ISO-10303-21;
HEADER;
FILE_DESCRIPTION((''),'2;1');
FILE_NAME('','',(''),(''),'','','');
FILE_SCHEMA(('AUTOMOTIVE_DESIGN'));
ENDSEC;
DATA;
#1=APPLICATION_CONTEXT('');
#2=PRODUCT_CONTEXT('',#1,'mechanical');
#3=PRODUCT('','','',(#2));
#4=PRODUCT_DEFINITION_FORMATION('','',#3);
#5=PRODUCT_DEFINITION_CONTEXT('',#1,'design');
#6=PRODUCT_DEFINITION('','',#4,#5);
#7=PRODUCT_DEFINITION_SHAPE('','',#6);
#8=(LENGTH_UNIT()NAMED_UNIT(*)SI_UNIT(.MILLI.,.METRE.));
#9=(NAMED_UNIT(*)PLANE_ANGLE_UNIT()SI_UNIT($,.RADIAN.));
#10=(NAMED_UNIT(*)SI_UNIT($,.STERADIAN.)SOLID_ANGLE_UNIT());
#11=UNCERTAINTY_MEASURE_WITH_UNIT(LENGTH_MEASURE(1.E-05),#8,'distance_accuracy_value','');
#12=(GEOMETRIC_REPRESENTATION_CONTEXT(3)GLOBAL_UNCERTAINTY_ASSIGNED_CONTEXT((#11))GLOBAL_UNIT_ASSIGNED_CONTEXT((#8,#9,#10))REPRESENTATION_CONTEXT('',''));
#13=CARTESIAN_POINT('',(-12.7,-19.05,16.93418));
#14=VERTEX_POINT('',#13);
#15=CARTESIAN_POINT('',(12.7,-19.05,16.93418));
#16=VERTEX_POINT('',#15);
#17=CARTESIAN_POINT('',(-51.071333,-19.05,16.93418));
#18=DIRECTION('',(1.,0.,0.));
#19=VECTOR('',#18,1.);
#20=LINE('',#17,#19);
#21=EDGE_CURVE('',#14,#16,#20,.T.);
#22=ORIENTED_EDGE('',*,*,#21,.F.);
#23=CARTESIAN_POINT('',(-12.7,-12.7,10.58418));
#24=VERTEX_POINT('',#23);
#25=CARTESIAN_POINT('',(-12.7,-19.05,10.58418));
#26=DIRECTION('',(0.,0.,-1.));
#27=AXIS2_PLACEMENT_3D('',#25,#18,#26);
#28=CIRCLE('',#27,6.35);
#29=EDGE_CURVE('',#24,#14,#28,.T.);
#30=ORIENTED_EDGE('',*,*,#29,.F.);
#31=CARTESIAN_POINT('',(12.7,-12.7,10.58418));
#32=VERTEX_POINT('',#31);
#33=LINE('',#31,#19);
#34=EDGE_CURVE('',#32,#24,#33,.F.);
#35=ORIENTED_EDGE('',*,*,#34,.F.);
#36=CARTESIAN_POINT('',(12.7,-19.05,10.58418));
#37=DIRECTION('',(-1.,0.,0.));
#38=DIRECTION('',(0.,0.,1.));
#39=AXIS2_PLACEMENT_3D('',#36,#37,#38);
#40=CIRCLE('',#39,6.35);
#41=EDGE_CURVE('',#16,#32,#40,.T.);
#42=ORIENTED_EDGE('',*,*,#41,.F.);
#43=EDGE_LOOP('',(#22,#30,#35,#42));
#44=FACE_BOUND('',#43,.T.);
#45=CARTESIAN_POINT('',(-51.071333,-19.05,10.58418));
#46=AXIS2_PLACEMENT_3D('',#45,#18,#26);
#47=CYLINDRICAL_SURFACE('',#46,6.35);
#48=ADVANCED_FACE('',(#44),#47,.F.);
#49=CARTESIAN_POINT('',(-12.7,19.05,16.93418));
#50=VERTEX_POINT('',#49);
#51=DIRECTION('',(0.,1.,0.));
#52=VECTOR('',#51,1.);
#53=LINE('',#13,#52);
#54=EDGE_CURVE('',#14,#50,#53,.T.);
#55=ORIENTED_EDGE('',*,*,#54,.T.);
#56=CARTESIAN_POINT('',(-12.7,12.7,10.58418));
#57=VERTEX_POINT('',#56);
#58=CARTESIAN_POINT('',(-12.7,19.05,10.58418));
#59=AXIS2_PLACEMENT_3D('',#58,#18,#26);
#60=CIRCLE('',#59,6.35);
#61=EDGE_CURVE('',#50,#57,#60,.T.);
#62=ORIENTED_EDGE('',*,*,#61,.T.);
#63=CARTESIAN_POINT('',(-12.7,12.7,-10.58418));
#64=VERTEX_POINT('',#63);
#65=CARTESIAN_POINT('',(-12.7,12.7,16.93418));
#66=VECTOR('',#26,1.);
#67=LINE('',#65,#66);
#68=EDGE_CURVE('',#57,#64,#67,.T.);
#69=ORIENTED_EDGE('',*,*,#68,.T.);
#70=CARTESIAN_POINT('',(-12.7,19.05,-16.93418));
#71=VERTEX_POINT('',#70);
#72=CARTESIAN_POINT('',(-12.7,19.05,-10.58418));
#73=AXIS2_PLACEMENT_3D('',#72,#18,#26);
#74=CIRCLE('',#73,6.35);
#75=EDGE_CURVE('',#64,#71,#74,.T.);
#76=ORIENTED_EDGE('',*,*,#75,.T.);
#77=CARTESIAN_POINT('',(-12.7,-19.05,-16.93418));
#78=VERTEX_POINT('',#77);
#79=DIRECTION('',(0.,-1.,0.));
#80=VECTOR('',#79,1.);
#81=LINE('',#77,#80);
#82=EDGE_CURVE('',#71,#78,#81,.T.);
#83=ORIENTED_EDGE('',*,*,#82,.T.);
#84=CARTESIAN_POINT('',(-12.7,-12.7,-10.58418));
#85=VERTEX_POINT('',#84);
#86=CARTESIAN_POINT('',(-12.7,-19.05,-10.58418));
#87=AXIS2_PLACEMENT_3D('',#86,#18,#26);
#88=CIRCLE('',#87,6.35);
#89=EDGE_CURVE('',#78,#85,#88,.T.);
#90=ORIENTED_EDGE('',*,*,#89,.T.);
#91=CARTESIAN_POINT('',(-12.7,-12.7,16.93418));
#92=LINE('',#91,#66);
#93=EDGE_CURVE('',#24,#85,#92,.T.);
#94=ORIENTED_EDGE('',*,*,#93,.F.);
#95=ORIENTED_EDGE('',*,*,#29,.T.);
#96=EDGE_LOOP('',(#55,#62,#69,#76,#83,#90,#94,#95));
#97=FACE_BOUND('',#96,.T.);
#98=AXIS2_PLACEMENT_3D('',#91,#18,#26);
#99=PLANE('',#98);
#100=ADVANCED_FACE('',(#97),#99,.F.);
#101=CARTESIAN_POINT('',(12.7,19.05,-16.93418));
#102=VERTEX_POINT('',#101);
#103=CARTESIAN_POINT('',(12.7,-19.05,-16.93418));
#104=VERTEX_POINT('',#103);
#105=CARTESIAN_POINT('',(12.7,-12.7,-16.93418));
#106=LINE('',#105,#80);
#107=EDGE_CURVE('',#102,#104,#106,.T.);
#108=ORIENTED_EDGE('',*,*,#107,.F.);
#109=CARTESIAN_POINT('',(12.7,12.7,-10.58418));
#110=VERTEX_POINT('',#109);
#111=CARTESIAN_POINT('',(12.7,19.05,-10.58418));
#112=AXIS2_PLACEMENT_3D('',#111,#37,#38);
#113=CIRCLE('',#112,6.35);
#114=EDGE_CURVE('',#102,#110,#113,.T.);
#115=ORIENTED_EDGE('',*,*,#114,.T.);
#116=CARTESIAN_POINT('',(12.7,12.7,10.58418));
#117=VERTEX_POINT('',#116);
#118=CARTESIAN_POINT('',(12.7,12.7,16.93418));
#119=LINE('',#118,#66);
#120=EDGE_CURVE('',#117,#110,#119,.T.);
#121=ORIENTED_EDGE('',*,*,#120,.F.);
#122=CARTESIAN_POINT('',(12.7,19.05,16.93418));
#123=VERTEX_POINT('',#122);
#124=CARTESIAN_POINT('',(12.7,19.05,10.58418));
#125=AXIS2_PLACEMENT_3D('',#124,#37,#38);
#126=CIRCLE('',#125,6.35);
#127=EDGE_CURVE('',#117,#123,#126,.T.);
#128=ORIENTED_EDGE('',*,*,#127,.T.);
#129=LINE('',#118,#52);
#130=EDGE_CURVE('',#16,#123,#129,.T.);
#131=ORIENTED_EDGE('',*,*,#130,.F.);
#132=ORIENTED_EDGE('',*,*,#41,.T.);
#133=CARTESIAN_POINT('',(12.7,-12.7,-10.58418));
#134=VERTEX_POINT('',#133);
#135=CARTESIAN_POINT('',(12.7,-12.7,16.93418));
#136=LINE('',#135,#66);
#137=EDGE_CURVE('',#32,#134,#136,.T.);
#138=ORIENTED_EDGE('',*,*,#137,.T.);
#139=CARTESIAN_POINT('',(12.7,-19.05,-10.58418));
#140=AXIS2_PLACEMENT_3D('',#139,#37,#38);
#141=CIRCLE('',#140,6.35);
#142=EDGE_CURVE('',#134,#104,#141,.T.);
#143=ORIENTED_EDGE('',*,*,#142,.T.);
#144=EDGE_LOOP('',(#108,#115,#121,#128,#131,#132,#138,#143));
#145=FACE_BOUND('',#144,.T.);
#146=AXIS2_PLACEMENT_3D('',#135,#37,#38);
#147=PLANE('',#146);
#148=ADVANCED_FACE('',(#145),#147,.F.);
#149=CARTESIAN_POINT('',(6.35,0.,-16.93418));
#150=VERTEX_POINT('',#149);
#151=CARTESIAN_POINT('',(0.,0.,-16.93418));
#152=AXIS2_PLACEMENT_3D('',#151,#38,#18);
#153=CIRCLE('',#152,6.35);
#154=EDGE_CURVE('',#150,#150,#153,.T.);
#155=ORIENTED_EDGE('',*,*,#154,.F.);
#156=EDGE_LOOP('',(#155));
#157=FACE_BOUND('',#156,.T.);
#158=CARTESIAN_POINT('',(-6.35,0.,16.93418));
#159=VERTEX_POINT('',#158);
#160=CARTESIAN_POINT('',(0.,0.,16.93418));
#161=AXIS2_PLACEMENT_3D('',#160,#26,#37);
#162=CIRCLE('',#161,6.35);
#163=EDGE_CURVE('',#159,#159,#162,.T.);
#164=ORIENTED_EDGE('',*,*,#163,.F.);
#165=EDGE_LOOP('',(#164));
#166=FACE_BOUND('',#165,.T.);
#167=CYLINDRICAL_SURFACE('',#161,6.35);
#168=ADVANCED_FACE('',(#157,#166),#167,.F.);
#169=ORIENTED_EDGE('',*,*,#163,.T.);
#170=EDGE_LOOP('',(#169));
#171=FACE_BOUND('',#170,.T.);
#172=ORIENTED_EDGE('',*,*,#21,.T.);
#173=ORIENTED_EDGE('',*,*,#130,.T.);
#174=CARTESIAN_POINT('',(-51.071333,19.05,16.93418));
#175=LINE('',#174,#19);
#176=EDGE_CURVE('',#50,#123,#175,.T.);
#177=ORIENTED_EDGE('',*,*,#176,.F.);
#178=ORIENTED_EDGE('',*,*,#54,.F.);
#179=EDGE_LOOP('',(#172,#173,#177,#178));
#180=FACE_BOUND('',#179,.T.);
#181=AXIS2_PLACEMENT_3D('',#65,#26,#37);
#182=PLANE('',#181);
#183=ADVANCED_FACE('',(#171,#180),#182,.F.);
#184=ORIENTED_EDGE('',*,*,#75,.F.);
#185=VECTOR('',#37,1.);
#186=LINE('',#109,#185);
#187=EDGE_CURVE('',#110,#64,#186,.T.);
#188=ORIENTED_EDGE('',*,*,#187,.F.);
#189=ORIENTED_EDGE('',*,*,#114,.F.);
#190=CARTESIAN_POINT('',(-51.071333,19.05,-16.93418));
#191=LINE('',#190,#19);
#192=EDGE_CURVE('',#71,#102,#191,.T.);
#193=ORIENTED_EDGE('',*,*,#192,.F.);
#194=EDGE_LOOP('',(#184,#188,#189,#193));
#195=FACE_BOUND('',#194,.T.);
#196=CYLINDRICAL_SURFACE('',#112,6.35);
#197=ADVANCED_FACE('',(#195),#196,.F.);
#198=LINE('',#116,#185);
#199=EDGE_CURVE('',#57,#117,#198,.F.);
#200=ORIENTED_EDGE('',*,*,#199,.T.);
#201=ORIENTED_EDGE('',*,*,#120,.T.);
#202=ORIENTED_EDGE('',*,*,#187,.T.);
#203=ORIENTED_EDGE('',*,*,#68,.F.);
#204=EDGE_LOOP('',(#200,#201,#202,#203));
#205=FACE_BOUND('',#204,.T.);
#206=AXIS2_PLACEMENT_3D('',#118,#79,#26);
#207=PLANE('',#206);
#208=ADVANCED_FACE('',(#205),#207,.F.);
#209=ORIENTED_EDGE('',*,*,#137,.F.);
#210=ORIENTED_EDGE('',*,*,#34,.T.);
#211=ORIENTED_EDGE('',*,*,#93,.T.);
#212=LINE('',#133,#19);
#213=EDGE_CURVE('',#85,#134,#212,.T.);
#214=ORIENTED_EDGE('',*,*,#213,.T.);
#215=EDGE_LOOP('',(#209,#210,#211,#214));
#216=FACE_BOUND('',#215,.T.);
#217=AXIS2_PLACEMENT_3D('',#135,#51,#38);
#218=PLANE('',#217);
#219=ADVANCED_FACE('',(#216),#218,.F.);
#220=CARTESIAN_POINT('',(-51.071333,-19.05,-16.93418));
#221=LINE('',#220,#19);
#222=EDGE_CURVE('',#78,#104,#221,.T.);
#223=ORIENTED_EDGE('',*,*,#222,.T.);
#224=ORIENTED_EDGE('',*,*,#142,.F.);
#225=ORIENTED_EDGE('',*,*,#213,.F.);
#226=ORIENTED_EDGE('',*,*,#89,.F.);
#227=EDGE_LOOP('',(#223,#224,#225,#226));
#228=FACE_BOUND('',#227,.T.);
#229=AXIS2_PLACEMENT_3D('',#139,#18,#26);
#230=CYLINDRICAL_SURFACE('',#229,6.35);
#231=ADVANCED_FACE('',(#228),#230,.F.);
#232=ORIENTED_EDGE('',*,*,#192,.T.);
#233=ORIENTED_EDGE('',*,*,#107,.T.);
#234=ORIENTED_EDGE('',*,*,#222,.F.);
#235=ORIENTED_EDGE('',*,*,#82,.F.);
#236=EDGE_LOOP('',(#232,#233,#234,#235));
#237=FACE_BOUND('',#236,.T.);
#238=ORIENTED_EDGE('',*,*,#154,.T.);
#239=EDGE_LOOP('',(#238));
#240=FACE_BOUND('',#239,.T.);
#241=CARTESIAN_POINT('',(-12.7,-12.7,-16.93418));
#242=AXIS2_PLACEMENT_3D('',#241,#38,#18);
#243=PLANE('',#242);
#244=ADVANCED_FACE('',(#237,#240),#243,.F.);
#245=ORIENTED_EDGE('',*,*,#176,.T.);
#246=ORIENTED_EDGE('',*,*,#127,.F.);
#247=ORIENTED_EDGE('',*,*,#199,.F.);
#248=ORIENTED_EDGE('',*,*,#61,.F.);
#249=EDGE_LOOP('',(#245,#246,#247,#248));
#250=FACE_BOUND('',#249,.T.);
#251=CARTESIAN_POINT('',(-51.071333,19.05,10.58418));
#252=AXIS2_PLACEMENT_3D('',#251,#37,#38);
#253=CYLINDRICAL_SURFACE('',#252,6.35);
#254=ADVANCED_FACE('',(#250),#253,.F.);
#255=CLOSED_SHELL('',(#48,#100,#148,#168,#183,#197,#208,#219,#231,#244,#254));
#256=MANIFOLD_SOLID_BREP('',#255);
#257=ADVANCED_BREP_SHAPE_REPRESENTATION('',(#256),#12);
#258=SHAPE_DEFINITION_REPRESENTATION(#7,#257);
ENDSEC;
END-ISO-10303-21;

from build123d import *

# Parameters (mm, degrees)
SKETCH1_W           = 25.4
SKETCH1_H           = 25.4
SKETCH1_R           = 6.35
BOSS_EXTRUDE1_DEPTH = 16.93418
BOSS_EXTRUDE2_DEPTH = 25.4
FILLET1_R           = 6.35
CUT_EXTRUDE1_DEPTH  = 39.338661357


with BuildPart() as part:
    # Sketch1 → Boss-Extrude1 (new, symmetric)
    with BuildSketch(Plane.XY):
        Rectangle(SKETCH1_W, SKETCH1_H)
        Circle(SKETCH1_R, mode=Mode.SUBTRACT)
    extrude(amount=BOSS_EXTRUDE1_DEPTH, both=True)

    # Sketch3 → Boss-Extrude2 (add)
    with BuildSketch(Plane(origin=(12.7, 0, 0), x_dir=(0, 0, -1), z_dir=(1, 0, 0))):
        Polygon((-16.93418, -12.7), (-16.93418, 12.7), (-16.93418, 19.05), (-21.489310241, 19.05), (-21.489310241, -19.05), (-16.93418, -19.05), align=None)
        Polygon((16.93418, -12.7), (16.93418, 12.7), (16.93418, 19.05), (21.489310241, 19.05), (21.489310241, -19.05), (16.93418, -19.05), align=None)
    extrude(amount=-BOSS_EXTRUDE2_DEPTH)

    # Fillet1
    fillet1_edges = [part.edges().sort_by_distance(p)[0] for p in [
        (0, -12.7, -16.93418),
        (0, -12.7, 16.93418),
        (0, 12.7, 16.93418),
        (0, 12.7, -16.93418),
    ]]
    fillet(fillet1_edges, radius=FILLET1_R - 0.0001)  # a hair under: the kernel refuses the full size

    # Sketch3<2> → Cut-Extrude1 (cut, through all)
    with BuildSketch(Plane(origin=(12.7, 0, 0), x_dir=(0, 0, -1), z_dir=(1, 0, 0))):
        Polygon((-16.93418, -12.7), (-16.93418, 12.7), (-16.93418, 19.05), (-21.489310241, 19.05), (-21.489310241, -19.05), (-16.93418, -19.05), align=None)
        Polygon((16.93418, -12.7), (16.93418, 12.7), (16.93418, 19.05), (21.489310241, 19.05), (21.489310241, -19.05), (16.93418, -19.05), align=None)
    extrude(amount=-CUT_EXTRUDE1_DEPTH, mode=Mode.SUBTRACT)


solid = part.part
